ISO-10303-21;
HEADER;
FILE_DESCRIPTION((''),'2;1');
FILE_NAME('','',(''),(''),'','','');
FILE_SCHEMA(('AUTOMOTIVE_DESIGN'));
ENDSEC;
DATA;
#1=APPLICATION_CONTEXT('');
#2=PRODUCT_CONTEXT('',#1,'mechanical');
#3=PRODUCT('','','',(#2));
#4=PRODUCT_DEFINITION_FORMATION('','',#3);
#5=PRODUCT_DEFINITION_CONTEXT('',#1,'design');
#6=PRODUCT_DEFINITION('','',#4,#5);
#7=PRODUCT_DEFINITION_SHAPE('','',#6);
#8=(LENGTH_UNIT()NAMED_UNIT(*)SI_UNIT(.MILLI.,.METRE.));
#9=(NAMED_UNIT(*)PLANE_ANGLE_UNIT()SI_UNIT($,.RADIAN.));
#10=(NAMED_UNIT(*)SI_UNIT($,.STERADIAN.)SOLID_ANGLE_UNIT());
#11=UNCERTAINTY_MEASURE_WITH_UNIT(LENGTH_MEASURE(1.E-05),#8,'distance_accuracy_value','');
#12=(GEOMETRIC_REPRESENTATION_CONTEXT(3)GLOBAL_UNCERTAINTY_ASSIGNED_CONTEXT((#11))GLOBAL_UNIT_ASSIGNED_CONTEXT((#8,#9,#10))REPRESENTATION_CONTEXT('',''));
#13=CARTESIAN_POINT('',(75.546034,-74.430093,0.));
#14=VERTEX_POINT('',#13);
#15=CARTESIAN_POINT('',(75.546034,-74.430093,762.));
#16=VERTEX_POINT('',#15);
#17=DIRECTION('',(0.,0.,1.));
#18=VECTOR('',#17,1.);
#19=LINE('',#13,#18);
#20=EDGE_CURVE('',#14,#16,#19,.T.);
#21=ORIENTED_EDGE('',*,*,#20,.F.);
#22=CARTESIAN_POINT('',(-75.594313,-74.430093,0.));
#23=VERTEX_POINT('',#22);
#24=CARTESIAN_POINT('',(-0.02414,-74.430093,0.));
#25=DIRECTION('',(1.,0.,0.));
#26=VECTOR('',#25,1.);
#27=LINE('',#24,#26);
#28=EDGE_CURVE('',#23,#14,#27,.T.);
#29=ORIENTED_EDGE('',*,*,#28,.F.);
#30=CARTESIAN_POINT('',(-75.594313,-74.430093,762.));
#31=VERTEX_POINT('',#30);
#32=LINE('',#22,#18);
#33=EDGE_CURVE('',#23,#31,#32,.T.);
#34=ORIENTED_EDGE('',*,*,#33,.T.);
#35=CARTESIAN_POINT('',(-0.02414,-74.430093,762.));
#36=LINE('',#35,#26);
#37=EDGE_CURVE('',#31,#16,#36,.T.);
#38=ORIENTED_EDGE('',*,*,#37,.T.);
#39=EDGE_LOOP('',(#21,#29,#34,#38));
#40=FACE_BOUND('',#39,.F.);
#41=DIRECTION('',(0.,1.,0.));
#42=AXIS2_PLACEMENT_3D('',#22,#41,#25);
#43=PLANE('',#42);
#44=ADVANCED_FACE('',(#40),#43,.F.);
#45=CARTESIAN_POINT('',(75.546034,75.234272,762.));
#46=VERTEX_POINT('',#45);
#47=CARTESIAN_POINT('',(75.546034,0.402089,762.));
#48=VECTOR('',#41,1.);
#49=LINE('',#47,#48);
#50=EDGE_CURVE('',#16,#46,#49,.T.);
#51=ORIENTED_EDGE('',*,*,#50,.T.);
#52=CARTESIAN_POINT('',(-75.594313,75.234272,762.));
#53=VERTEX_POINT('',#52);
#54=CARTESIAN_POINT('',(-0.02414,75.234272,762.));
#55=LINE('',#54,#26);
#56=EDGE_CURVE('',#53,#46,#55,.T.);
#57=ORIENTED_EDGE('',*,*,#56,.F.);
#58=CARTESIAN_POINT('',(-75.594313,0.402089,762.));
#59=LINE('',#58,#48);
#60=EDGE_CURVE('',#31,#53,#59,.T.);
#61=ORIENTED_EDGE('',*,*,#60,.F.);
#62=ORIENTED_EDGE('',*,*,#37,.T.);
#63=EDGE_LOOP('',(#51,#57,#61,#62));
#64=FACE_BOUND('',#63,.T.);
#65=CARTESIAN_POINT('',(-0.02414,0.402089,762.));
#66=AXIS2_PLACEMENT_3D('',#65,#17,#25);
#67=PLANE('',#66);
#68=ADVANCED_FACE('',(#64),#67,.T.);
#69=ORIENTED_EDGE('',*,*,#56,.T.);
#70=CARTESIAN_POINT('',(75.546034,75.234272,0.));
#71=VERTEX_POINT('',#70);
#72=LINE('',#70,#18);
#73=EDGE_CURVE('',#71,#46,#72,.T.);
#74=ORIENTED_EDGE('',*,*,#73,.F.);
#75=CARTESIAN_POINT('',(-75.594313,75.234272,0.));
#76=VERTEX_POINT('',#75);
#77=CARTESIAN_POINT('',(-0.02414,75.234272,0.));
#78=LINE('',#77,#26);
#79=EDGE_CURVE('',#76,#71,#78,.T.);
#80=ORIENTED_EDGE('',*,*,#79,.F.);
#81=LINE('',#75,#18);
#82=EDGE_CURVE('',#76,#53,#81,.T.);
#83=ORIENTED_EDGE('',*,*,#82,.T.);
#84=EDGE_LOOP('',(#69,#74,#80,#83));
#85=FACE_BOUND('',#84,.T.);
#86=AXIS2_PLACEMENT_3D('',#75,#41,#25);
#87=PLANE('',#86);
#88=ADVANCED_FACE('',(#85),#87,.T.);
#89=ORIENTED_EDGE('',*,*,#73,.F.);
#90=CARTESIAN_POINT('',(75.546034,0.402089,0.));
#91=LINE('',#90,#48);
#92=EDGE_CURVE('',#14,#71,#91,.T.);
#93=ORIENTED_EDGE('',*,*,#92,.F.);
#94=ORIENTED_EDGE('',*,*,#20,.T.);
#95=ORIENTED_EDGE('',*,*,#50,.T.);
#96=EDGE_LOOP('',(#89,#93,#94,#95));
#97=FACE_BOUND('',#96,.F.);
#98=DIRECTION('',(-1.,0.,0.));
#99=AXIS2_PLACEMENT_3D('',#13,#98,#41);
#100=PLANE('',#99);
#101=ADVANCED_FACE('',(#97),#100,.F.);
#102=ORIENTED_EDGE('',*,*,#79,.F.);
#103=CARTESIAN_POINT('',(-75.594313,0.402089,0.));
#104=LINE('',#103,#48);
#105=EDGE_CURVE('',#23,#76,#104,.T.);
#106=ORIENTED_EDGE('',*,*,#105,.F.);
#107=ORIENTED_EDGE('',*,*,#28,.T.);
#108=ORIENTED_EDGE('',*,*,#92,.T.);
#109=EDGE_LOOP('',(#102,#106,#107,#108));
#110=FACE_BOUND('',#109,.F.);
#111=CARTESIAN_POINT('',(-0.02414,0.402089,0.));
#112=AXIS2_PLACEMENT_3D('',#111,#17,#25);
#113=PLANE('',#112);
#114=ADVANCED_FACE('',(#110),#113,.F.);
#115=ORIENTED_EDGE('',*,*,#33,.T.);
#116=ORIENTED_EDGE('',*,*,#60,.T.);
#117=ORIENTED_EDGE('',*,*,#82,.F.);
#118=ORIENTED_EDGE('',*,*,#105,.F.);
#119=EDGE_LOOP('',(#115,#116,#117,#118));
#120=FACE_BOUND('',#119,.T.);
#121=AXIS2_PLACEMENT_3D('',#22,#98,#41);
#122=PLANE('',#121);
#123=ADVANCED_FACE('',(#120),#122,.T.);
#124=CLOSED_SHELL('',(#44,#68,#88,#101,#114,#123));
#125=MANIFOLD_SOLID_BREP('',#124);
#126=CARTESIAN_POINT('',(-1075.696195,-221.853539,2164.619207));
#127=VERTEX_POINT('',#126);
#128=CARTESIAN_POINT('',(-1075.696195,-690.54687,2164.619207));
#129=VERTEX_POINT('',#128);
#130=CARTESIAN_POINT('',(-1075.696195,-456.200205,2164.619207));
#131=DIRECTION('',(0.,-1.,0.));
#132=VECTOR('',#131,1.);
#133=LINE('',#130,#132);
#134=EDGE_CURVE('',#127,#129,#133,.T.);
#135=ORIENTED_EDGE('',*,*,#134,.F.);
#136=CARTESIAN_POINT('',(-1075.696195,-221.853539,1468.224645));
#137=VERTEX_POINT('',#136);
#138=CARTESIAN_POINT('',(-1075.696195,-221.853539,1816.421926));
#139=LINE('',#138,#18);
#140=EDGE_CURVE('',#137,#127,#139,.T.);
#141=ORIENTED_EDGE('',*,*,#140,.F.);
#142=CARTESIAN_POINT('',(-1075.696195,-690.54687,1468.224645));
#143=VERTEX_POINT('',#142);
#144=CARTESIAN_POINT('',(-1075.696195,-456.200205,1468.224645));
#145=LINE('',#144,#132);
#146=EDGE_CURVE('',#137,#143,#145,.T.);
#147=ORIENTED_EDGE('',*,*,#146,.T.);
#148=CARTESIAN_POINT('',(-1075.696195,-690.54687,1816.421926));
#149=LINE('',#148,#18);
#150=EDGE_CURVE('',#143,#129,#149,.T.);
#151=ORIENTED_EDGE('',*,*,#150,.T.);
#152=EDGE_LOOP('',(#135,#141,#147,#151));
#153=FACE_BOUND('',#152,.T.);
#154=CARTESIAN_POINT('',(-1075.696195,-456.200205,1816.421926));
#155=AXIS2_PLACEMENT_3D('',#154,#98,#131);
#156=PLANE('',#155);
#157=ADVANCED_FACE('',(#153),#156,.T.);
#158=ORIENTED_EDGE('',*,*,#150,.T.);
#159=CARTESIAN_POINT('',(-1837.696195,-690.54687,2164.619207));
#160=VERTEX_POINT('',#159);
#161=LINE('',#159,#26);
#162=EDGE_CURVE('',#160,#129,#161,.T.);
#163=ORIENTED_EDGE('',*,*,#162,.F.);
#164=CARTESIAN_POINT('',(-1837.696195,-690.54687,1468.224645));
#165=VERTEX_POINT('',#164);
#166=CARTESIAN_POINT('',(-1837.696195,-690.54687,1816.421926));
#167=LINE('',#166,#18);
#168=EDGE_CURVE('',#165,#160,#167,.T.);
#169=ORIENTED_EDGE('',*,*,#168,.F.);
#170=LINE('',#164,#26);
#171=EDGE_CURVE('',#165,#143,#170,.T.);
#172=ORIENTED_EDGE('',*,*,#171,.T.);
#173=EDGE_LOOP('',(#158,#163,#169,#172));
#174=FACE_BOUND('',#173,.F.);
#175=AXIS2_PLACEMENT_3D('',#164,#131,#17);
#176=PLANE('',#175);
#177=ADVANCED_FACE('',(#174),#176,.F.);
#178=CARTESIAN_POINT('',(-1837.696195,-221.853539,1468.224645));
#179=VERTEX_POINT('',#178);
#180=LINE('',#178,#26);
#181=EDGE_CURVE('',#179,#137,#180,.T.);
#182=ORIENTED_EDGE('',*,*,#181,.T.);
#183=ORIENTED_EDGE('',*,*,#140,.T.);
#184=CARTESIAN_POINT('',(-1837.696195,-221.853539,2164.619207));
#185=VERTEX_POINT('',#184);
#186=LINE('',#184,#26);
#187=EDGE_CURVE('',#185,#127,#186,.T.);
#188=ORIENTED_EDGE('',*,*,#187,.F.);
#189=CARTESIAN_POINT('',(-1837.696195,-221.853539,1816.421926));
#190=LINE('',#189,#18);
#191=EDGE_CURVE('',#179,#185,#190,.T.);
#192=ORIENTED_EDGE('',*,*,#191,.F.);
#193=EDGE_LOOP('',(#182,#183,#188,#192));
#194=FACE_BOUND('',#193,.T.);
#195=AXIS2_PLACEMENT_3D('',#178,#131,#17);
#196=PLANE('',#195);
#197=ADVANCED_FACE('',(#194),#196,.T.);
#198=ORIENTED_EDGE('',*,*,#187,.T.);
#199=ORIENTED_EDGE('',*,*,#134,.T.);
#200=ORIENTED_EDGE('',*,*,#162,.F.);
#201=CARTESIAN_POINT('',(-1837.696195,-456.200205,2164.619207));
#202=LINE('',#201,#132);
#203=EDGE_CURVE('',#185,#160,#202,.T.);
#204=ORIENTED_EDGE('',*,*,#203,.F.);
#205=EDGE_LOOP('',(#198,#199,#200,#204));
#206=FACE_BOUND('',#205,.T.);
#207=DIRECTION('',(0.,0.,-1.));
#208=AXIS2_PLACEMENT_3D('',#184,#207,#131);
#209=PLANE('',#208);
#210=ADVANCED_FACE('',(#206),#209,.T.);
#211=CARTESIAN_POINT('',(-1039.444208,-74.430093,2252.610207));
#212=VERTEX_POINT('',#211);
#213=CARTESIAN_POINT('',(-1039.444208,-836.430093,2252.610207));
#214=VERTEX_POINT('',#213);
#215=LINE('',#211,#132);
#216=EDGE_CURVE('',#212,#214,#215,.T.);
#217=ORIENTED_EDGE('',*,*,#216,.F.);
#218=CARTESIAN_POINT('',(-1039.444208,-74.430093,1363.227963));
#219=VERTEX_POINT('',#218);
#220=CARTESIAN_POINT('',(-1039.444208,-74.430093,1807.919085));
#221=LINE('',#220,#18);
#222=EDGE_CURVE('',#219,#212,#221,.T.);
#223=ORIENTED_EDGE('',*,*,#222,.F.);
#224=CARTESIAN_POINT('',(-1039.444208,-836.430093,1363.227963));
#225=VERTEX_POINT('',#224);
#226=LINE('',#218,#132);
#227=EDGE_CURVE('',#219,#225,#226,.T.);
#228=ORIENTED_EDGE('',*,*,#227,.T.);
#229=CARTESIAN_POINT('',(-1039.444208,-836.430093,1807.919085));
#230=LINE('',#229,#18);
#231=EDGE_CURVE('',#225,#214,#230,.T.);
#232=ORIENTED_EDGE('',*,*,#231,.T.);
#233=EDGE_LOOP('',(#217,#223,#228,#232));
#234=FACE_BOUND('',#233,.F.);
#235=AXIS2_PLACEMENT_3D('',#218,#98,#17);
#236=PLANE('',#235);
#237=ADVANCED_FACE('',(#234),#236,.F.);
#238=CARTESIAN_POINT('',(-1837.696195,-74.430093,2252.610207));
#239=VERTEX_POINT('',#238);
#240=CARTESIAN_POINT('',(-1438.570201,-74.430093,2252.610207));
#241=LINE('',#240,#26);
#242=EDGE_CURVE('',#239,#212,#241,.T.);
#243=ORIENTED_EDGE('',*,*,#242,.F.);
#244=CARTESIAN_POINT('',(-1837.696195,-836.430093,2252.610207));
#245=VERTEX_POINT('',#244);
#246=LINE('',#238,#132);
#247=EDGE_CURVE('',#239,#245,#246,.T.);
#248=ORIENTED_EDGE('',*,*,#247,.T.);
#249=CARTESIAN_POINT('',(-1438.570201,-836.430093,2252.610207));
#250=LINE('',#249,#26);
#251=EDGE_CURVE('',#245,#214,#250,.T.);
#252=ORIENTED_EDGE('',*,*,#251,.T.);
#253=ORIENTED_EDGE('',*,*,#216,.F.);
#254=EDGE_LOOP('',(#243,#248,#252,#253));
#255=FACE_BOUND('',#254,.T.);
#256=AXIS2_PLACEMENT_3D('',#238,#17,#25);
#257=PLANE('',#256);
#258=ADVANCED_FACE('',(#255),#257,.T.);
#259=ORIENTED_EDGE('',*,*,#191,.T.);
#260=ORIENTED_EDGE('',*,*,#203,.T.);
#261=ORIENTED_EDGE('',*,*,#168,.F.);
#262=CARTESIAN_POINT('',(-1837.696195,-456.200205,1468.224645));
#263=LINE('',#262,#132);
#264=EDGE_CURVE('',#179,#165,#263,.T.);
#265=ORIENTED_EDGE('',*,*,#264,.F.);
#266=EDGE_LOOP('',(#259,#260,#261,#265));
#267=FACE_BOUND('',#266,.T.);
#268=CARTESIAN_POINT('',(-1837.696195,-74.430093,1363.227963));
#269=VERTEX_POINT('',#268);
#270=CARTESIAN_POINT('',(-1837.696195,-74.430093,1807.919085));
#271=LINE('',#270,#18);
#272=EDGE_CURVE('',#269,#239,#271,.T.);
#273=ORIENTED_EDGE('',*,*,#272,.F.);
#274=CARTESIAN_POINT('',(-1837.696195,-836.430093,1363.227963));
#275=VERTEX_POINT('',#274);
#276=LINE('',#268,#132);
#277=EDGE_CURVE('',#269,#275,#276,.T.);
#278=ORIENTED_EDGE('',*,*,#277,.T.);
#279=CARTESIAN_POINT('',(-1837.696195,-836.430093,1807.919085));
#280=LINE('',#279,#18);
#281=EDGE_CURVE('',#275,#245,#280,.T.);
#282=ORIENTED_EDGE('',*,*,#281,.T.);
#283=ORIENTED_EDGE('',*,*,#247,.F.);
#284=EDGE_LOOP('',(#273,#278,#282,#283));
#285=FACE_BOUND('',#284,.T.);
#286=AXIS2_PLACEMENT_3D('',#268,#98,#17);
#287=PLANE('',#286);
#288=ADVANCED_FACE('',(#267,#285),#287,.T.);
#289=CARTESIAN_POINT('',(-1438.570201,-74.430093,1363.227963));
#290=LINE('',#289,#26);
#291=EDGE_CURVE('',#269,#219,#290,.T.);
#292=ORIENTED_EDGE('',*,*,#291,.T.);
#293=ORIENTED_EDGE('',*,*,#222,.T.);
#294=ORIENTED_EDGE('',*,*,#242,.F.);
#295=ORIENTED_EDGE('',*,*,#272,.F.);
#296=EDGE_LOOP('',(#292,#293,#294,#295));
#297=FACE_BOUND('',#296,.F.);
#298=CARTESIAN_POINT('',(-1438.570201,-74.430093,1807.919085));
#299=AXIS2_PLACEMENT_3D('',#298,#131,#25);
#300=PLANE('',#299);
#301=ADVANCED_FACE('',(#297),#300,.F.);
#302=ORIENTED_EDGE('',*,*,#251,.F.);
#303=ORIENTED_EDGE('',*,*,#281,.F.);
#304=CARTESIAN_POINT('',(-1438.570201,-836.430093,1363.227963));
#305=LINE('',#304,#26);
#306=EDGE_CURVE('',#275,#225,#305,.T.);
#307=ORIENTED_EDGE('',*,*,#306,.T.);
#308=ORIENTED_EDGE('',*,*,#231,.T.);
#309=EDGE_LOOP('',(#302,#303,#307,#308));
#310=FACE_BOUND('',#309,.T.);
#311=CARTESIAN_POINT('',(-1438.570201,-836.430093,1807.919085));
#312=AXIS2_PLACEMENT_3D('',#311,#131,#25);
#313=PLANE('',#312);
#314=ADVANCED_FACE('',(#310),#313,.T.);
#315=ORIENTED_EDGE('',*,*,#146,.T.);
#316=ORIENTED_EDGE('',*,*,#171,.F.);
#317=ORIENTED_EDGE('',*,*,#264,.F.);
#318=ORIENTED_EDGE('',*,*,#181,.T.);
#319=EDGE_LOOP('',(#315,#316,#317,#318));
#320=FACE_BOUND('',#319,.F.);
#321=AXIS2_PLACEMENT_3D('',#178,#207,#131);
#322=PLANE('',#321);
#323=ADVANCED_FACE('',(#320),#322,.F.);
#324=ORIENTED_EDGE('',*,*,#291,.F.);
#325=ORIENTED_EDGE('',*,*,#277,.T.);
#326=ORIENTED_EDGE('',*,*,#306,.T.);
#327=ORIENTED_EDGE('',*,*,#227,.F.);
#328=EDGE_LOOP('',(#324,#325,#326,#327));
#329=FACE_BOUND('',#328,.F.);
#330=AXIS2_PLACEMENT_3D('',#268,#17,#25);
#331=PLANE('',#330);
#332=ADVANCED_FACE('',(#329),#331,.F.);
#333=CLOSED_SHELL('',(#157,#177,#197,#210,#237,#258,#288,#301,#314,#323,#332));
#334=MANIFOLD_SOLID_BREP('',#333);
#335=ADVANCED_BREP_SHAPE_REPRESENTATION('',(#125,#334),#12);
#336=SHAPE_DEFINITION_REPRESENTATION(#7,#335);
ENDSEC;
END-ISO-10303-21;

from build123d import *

# Parameters (mm, degrees)
F0_W     = 151.1403471231
F0_H     = 149.6643647552
F1_DEPTH = 762
F6_W     = 798.2519865036
F6_H     = 889.3822431564
F7_DEPTH = 762
F8_W     = 468.693330884
F8_H     = 696.3945627213
F9_DEPTH = 762


# Not quite as in the source:
# - the program builds the solid bodies; features that only make, move or delete a surface that nothing else refers to are left out


with BuildPart() as f1:
    # F0 (on Top) → F1 (new body)
    with BuildSketch(Plane.XY):
        with Locations((-0.0241398811, 0.4020892084)):
            Rectangle(F0_W, F0_H)
    extrude(amount=F1_DEPTH)


with BuildPart() as f7:
    # F6 (on face) → F7 (new body)
    with BuildSketch(Plane.XZ.offset(74.4300931692)):
        with Locations((-1438.5702013969, 1807.9190850258)):
            Rectangle(F6_W, F6_H)
    extrude(amount=F7_DEPTH)

    # F8 (on face) → F9 (cut)
    with BuildSketch(Plane(origin=(-1837.6961946487, 0, 0), x_dir=(0, -1, 0), z_dir=(-1, 0, 0))):
        with Locations((456.2002047896, 1816.4219260216)):
            Rectangle(F8_W, F8_H)
    extrude(amount=-F9_DEPTH, mode=Mode.SUBTRACT)


solid = Compound([f1.part, f7.part])
